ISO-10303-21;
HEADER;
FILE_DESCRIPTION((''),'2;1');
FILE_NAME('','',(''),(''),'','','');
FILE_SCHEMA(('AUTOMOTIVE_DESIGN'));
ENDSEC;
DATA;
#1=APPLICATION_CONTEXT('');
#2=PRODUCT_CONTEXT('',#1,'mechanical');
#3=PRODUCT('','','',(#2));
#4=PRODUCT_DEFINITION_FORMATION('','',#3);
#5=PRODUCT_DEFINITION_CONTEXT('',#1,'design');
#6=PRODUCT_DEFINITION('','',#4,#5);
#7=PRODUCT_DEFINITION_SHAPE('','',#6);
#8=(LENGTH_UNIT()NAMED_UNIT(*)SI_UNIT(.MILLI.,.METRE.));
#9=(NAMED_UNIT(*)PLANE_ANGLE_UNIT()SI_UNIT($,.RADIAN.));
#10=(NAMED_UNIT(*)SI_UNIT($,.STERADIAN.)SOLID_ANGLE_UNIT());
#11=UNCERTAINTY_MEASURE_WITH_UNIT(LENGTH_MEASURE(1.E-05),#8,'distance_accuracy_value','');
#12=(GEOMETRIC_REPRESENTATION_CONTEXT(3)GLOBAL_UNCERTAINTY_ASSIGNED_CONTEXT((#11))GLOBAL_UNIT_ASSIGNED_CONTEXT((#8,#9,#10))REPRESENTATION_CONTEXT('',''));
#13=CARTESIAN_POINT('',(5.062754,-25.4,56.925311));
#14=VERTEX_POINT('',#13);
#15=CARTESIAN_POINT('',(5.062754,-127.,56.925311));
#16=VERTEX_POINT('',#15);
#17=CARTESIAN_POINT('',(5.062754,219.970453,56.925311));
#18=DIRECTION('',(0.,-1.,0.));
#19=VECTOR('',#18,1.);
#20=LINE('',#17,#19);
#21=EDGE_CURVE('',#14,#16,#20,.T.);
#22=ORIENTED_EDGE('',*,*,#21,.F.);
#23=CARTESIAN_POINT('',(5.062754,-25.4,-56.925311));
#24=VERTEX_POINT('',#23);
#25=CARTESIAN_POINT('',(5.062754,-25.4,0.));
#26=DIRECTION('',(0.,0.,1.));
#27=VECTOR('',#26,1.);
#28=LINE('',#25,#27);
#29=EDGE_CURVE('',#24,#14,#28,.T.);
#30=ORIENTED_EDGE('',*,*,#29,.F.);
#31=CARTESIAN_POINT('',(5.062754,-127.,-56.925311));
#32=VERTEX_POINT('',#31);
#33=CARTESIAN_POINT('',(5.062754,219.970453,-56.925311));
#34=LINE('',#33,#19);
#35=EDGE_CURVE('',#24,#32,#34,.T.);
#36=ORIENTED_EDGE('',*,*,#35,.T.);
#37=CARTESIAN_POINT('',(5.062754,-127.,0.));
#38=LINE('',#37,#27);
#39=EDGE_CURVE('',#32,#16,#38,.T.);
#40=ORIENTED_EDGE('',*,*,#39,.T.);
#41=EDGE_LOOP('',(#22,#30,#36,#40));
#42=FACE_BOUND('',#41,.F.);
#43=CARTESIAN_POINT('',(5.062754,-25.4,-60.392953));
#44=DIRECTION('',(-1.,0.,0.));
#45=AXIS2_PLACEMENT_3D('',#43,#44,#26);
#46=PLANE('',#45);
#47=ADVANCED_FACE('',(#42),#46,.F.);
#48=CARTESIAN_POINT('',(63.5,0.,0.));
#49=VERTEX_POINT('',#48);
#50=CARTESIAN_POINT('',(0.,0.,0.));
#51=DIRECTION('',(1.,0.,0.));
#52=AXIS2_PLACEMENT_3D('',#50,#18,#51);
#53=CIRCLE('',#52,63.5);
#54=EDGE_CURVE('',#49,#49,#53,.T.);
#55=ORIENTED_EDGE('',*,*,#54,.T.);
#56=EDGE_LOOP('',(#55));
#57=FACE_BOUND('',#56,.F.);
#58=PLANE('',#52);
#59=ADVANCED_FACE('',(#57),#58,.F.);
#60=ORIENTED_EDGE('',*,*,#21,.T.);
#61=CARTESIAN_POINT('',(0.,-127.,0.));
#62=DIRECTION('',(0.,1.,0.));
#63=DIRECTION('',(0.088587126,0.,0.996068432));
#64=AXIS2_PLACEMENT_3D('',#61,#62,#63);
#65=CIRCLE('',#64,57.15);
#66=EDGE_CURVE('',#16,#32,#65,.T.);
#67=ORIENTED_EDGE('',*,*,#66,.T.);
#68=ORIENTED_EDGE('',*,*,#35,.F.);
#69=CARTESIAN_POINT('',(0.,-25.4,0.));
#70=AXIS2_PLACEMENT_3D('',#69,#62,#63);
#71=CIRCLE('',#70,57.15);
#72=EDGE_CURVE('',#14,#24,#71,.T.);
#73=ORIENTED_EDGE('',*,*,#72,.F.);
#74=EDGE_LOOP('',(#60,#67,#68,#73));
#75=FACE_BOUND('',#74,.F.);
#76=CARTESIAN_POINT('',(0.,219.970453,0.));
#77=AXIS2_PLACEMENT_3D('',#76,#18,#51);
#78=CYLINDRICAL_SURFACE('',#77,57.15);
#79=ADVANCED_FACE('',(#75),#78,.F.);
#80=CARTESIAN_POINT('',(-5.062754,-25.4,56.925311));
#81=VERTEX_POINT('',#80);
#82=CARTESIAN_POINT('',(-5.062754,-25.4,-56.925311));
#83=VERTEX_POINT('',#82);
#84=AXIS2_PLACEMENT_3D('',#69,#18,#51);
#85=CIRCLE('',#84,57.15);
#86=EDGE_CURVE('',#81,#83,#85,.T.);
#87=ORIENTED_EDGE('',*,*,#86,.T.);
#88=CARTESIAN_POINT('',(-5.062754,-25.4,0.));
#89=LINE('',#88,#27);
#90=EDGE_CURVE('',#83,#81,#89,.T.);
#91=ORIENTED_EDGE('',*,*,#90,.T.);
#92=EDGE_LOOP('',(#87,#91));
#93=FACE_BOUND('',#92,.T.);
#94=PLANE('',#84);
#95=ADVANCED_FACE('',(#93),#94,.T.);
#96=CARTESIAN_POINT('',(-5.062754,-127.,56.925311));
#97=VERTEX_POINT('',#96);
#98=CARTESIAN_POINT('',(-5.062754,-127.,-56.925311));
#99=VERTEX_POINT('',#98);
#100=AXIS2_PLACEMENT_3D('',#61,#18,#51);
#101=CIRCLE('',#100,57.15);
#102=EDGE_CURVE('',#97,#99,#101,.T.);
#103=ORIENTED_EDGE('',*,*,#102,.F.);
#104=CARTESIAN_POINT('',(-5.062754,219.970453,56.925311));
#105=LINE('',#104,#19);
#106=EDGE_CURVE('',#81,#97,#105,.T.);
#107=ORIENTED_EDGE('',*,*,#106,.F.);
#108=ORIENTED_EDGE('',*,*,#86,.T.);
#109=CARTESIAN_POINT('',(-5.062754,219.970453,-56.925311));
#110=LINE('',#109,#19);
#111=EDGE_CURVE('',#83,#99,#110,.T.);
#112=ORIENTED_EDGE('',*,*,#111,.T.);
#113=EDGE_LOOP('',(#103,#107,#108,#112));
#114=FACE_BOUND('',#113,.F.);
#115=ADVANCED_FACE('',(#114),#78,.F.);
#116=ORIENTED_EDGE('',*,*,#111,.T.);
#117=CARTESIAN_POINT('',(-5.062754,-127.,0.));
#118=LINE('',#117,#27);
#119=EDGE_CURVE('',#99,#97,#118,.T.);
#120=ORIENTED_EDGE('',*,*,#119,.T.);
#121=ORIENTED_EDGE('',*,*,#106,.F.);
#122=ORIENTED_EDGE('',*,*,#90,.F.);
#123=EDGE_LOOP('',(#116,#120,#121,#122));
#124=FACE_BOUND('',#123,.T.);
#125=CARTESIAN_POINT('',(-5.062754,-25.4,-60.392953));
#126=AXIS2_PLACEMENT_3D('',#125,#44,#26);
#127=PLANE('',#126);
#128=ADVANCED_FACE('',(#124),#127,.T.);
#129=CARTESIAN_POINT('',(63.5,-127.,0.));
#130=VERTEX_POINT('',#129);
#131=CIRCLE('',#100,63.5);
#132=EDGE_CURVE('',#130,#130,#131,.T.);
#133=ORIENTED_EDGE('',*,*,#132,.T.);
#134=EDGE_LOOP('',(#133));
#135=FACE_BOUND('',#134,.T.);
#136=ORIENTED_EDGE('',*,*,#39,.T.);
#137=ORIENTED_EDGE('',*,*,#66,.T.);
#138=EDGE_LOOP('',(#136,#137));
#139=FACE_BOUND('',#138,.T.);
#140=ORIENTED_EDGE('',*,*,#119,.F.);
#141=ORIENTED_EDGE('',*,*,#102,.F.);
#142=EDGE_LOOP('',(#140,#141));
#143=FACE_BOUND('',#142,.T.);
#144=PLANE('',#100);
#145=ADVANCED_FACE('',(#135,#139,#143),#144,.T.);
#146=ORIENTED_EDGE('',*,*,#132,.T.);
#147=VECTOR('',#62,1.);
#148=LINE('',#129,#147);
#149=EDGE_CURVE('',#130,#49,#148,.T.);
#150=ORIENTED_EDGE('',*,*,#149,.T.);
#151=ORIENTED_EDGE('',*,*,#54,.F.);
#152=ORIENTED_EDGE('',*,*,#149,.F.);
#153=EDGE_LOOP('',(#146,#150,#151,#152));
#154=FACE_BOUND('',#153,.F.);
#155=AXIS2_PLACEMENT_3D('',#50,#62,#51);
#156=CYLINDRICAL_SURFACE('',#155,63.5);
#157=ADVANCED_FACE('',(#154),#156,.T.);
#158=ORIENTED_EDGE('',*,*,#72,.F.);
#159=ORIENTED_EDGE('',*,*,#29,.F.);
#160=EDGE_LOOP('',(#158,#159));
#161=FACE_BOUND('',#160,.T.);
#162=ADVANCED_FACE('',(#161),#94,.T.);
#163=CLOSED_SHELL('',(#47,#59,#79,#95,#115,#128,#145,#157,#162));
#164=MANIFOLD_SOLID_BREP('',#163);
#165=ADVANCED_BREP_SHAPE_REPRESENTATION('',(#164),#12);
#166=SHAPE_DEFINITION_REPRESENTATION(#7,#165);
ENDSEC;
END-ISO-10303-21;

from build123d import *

# Parameters (mm, degrees)
F0_R     = 63.5
F1_DEPTH = 127
F4_D     = 114.3
F5_DEPTH = 25.4
F6_W     = 10.1255085319
F6_H     = 120.7859069109
F7_DEPTH = 101.6


# Not quite as in the source:
# - a feature names something its author has since deleted; it is built from what else it names


with BuildPart() as f1:
    # F0 (on Front) → F1 (new body)
    with BuildSketch(Plane.XZ):
        Circle(F0_R)
    extrude(amount=F1_DEPTH)

    # F4 (through all)
    with Locations(Plane(origin=(0, 0, 0), x_dir=(-1, 0, 0), z_dir=(0, 1, 0))):
        with Locations((0, 0)):
            Hole(F4_D / 2)

    # F0 (on Front) → F5 (join)
    with BuildSketch(Plane.XZ):
        Circle(F0_R)
    extrude(amount=F5_DEPTH)

    # F6 (on face) → F7 (join)
    with BuildSketch(Plane.XZ.offset(25.4)):
        Rectangle(F6_W, F6_H)
    extrude(amount=F7_DEPTH)


solid = f1.part
